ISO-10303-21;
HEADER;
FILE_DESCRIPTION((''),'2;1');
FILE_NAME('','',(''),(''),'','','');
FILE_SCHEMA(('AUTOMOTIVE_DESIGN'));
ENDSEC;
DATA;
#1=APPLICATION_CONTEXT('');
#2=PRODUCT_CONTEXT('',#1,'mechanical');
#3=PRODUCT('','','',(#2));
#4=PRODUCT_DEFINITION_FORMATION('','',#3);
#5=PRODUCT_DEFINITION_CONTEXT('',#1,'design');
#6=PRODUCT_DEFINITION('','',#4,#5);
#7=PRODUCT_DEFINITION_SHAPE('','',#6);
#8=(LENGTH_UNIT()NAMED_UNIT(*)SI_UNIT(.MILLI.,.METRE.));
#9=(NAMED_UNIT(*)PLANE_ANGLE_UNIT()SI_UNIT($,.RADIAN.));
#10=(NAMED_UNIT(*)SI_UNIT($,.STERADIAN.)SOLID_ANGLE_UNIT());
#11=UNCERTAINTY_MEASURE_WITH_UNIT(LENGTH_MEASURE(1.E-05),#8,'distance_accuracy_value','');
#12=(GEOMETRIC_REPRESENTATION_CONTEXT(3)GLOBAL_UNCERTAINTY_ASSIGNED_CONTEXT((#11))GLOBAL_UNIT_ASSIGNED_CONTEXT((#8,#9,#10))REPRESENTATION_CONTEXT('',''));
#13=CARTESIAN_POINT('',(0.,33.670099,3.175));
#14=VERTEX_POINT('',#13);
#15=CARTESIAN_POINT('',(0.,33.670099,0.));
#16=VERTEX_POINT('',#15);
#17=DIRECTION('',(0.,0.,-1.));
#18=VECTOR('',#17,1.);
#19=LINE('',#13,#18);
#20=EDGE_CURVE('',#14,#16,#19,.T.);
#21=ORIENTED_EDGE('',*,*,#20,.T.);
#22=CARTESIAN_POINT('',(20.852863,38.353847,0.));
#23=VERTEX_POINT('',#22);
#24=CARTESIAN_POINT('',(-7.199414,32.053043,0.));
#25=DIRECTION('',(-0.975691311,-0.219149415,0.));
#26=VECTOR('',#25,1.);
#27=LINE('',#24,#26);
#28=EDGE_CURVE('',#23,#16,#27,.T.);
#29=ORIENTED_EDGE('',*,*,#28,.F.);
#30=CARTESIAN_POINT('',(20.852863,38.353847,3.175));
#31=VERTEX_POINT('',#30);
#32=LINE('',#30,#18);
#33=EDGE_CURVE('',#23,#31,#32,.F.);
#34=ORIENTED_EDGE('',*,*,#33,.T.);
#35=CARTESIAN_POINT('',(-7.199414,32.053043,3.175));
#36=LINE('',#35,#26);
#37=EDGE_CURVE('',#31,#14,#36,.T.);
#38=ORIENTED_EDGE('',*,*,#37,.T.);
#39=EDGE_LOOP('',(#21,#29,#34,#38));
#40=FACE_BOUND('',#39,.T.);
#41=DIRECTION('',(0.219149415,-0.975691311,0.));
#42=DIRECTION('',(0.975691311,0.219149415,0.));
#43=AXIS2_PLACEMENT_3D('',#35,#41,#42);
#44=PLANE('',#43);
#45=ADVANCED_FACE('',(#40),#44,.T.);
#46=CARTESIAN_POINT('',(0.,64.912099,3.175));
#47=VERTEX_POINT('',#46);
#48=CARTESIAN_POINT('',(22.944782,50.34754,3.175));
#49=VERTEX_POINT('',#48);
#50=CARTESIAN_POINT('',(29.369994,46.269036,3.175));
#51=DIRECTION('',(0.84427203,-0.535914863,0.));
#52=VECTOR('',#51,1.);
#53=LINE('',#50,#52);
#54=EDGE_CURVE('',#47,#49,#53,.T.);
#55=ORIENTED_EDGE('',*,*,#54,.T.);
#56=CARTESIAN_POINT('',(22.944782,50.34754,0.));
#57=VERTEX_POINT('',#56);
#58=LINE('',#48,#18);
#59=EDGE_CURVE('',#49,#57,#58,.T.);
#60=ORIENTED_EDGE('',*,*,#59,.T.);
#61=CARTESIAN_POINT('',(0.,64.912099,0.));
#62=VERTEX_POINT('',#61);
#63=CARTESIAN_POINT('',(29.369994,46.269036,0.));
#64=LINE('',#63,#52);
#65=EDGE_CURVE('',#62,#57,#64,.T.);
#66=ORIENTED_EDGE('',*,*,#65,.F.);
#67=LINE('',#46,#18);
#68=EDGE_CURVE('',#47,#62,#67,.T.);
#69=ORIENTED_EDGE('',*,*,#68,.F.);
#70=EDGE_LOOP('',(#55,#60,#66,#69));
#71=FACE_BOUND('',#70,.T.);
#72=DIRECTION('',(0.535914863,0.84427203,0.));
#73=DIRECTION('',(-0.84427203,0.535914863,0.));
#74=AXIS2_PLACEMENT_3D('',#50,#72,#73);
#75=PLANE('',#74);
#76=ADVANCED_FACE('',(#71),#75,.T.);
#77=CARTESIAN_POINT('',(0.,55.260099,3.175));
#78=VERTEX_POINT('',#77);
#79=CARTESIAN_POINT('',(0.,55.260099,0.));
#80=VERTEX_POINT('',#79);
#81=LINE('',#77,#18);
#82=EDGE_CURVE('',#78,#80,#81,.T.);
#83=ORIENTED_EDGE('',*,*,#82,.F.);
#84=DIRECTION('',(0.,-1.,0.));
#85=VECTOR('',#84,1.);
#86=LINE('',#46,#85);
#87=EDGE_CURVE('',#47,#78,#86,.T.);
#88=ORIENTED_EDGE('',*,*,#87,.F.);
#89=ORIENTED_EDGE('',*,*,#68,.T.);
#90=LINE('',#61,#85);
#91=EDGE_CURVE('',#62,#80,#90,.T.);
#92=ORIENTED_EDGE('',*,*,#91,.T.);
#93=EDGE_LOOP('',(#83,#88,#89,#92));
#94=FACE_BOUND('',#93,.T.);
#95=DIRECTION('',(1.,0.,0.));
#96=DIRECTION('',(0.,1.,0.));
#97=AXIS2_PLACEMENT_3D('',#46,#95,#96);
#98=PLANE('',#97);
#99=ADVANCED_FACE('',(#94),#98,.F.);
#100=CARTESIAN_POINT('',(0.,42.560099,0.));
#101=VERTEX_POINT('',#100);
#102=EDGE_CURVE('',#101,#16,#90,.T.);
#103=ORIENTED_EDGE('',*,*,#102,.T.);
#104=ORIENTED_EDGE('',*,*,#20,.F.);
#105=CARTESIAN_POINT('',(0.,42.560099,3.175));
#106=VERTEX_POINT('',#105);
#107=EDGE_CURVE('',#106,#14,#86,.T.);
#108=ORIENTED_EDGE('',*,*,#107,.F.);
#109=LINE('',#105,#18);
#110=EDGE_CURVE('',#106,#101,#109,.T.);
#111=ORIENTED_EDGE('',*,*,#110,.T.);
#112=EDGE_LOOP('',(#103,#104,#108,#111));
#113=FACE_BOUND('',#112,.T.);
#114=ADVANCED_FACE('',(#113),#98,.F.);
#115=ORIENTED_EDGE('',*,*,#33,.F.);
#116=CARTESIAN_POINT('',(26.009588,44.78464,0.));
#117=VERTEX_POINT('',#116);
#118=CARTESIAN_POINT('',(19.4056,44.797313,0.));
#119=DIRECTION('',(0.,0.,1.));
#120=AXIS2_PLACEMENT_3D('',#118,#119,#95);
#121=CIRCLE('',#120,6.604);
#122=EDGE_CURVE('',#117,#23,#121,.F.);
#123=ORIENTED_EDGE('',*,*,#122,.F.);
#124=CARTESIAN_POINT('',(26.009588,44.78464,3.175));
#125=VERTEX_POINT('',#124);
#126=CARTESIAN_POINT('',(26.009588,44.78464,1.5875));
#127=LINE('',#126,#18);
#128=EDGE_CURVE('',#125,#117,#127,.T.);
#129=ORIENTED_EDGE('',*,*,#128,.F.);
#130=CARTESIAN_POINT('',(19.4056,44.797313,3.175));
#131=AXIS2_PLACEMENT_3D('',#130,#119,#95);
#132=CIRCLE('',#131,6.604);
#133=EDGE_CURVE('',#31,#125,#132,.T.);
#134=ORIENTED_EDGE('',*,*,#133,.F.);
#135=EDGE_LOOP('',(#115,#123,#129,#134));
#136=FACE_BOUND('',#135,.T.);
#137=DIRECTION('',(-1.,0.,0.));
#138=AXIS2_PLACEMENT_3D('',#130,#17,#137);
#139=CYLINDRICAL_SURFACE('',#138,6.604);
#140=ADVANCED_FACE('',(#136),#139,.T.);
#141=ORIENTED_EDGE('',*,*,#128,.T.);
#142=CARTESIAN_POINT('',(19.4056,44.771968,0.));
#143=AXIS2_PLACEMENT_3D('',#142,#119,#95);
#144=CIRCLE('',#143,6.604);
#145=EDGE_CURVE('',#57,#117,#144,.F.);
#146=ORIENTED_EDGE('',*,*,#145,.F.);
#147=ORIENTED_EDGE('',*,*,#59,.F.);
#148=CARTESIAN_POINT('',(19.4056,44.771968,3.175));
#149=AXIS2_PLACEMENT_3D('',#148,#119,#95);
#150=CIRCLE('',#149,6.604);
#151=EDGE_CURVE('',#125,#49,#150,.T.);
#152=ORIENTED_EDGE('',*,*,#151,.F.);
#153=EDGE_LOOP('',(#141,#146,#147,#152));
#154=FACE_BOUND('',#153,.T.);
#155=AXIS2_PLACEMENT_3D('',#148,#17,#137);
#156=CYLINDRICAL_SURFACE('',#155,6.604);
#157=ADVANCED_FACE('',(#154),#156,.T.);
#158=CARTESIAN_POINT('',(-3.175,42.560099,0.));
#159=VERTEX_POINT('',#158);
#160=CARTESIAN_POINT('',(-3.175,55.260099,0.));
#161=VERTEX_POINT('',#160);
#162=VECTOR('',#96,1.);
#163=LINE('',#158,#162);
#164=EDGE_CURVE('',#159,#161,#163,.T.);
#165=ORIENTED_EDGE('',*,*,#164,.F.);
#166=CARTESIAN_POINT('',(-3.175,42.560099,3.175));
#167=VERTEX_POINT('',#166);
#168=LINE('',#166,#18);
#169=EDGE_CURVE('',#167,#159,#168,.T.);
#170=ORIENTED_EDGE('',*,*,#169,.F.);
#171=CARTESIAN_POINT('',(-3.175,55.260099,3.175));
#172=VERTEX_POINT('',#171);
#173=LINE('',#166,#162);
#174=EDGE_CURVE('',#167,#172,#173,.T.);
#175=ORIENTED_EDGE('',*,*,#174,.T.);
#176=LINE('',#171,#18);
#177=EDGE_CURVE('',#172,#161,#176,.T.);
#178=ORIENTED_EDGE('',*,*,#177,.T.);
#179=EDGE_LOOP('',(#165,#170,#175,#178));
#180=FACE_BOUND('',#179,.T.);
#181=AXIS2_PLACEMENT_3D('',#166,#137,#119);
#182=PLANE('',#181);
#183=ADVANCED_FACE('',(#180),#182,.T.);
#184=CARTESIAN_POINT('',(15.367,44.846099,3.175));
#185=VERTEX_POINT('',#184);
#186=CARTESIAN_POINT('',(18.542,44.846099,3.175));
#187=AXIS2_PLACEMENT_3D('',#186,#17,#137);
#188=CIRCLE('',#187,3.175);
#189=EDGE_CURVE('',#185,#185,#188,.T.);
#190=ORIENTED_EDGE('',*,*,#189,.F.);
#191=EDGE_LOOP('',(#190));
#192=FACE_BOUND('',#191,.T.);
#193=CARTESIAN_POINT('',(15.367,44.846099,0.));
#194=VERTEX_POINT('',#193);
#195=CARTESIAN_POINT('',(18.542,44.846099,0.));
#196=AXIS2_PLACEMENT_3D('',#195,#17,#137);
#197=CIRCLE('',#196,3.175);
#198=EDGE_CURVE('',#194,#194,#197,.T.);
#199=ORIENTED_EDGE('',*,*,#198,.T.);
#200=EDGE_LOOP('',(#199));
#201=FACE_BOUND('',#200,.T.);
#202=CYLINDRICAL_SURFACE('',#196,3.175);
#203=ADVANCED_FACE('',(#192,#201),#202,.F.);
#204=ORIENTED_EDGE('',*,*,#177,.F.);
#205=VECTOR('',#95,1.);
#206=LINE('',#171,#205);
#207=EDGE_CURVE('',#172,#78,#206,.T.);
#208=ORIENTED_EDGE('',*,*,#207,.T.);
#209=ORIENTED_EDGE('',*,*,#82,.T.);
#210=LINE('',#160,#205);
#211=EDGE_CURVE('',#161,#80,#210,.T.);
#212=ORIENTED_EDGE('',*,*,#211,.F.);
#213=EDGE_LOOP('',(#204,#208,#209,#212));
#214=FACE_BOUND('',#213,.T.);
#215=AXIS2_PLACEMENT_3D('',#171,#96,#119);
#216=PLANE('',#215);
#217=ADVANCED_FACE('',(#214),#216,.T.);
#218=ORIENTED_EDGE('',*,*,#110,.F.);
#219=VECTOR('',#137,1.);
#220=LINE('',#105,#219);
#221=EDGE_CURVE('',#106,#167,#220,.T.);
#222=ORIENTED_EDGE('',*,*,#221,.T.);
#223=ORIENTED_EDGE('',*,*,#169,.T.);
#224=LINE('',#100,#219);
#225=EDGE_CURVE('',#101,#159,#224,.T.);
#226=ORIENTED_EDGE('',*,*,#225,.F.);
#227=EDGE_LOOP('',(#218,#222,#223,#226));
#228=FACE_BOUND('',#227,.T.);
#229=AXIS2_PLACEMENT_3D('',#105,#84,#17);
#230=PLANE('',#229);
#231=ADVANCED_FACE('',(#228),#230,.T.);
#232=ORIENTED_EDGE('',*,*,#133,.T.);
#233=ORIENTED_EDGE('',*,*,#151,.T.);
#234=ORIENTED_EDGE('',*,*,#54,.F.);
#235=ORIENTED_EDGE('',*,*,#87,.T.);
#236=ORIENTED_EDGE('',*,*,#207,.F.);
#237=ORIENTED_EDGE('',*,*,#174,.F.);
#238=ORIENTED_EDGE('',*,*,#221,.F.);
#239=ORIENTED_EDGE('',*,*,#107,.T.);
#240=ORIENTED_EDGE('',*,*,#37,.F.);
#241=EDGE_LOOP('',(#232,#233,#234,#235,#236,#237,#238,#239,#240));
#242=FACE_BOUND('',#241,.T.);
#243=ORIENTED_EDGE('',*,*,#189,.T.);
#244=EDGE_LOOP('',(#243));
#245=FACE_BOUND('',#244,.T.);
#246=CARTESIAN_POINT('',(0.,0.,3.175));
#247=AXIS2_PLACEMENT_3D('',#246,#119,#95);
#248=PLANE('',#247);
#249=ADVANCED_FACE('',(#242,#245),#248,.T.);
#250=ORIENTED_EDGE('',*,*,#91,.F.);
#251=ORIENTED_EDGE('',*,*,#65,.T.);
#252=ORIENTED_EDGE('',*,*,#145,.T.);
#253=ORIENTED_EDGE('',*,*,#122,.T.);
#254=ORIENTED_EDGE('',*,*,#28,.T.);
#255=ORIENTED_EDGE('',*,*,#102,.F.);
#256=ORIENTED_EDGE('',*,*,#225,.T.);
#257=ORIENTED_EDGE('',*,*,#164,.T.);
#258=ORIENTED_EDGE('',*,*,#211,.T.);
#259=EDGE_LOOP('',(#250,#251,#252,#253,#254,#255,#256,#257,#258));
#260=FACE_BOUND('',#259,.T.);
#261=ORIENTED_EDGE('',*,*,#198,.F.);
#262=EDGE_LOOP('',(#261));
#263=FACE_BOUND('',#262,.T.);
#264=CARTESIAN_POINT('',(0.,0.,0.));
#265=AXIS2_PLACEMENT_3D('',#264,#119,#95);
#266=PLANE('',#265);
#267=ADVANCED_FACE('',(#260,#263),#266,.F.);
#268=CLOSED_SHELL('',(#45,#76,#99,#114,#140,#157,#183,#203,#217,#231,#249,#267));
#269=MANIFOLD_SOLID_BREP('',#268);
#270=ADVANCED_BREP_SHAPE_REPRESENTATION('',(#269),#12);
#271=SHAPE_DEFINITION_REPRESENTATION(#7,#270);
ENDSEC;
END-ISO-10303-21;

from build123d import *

# Parameters (mm, degrees)
SKETCH1_W                   = 68.548183611
SKETCH1_H                   = 64.912098736
BOSS_EXTRUDE1_DEPTH         = 3.175
F_1_4_0_25_DIAMETER_HOLE1_D = 6.35
CUT_EXTRUDE1_DEPTH          = 95.459063428
FILLET1_R                   = 6.604
SKETCH5_W                   = 3.175
SKETCH5_H                   = 12.7
BOSS_EXTRUDE2_DEPTH         = 3.175


with BuildPart() as part:
    # Sketch1 → Boss-Extrude1 (new body)
    with BuildSketch(Plane.XY):
        with Locations((34.274091805, 32.456049368)):
            Rectangle(SKETCH1_W, SKETCH1_H)
    extrude(amount=BOSS_EXTRUDE1_DEPTH)

    # 1/4 (0.25) Diameter Hole1 (through all)
    with Locations(Plane(origin=(0, 0, 0), x_dir=(-1, 0, 0), z_dir=(0, 0, -1))):
        with Locations((-18.542, 44.846098736)):
            Hole(F_1_4_0_25_DIAMETER_HOLE1_D / 2)

    # Sketch4 → Cut-Extrude1 (cut, through all)
    with BuildSketch(Plane(origin=(0, 0, 0), x_dir=(-1, 0, 0), z_dir=(0, 0, -1))):
        Polygon((-26.0096, 48.402098736), (0, 64.912098736), (-68.548183611, 64.912098736), (-68.548183611, 0), (0, 0), (0, 33.670098736), (-26.0096, 39.512098736), align=None)
    extrude(amount=-CUT_EXTRUDE1_DEPTH, mode=Mode.SUBTRACT)

    # Fillet1
    # the kernel refuses this fillet: 6.604 mm, written as the material it takes off along each edge
    with BuildSketch(Plane(origin=(26.0096, 48.402098736, -9.075328034), x_dir=(-0.84427202966114, 0.5359148625778718, 0), z_dir=(0, 0, 1))) as fillet1_piece_1:
        with BuildLine():
            CenterArc((FILLET1_R * 0.549686737352, FILLET1_R), FILLET1_R, 212.405976432, 57.594023568)
            Line((-FILLET1_R * 0.294585292309, FILLET1_R * 0.464085137422), (0, 0))
            Line((0, 0), (FILLET1_R * 0.549686737352, 0))
        make_face()
    extrude(amount=21.325656067, mode=Mode.SUBTRACT)
    with BuildSketch(Plane(origin=(26.0096, 39.512098736, -13.213034706), x_dir=(-0.9756913106586464, -0.21914941547997013, 0), z_dir=(0, 0, 1))) as fillet1_piece_2:
        with BuildLine():
            CenterArc((FILLET1_R * 0.800304948901, -FILLET1_R), FILLET1_R, 90, 77.340921003)
            Line((-FILLET1_R * 0.175386361757, -FILLET1_R * 0.78085058452), (0, 0))
            Line((0, 0), (FILLET1_R * 0.800304948901, 0))
        make_face()
    extrude(amount=29.601069413, mode=Mode.SUBTRACT)

    # Sketch5 → Boss-Extrude2 (add)
    with BuildSketch(Plane(origin=(0, 0, 0), x_dir=(-1, 0, 0), z_dir=(0, 0, -1))):
        with Locations((1.5875, 48.910098736)):
            Rectangle(SKETCH5_W, SKETCH5_H)
    extrude(amount=-BOSS_EXTRUDE2_DEPTH)


solid = part.part
